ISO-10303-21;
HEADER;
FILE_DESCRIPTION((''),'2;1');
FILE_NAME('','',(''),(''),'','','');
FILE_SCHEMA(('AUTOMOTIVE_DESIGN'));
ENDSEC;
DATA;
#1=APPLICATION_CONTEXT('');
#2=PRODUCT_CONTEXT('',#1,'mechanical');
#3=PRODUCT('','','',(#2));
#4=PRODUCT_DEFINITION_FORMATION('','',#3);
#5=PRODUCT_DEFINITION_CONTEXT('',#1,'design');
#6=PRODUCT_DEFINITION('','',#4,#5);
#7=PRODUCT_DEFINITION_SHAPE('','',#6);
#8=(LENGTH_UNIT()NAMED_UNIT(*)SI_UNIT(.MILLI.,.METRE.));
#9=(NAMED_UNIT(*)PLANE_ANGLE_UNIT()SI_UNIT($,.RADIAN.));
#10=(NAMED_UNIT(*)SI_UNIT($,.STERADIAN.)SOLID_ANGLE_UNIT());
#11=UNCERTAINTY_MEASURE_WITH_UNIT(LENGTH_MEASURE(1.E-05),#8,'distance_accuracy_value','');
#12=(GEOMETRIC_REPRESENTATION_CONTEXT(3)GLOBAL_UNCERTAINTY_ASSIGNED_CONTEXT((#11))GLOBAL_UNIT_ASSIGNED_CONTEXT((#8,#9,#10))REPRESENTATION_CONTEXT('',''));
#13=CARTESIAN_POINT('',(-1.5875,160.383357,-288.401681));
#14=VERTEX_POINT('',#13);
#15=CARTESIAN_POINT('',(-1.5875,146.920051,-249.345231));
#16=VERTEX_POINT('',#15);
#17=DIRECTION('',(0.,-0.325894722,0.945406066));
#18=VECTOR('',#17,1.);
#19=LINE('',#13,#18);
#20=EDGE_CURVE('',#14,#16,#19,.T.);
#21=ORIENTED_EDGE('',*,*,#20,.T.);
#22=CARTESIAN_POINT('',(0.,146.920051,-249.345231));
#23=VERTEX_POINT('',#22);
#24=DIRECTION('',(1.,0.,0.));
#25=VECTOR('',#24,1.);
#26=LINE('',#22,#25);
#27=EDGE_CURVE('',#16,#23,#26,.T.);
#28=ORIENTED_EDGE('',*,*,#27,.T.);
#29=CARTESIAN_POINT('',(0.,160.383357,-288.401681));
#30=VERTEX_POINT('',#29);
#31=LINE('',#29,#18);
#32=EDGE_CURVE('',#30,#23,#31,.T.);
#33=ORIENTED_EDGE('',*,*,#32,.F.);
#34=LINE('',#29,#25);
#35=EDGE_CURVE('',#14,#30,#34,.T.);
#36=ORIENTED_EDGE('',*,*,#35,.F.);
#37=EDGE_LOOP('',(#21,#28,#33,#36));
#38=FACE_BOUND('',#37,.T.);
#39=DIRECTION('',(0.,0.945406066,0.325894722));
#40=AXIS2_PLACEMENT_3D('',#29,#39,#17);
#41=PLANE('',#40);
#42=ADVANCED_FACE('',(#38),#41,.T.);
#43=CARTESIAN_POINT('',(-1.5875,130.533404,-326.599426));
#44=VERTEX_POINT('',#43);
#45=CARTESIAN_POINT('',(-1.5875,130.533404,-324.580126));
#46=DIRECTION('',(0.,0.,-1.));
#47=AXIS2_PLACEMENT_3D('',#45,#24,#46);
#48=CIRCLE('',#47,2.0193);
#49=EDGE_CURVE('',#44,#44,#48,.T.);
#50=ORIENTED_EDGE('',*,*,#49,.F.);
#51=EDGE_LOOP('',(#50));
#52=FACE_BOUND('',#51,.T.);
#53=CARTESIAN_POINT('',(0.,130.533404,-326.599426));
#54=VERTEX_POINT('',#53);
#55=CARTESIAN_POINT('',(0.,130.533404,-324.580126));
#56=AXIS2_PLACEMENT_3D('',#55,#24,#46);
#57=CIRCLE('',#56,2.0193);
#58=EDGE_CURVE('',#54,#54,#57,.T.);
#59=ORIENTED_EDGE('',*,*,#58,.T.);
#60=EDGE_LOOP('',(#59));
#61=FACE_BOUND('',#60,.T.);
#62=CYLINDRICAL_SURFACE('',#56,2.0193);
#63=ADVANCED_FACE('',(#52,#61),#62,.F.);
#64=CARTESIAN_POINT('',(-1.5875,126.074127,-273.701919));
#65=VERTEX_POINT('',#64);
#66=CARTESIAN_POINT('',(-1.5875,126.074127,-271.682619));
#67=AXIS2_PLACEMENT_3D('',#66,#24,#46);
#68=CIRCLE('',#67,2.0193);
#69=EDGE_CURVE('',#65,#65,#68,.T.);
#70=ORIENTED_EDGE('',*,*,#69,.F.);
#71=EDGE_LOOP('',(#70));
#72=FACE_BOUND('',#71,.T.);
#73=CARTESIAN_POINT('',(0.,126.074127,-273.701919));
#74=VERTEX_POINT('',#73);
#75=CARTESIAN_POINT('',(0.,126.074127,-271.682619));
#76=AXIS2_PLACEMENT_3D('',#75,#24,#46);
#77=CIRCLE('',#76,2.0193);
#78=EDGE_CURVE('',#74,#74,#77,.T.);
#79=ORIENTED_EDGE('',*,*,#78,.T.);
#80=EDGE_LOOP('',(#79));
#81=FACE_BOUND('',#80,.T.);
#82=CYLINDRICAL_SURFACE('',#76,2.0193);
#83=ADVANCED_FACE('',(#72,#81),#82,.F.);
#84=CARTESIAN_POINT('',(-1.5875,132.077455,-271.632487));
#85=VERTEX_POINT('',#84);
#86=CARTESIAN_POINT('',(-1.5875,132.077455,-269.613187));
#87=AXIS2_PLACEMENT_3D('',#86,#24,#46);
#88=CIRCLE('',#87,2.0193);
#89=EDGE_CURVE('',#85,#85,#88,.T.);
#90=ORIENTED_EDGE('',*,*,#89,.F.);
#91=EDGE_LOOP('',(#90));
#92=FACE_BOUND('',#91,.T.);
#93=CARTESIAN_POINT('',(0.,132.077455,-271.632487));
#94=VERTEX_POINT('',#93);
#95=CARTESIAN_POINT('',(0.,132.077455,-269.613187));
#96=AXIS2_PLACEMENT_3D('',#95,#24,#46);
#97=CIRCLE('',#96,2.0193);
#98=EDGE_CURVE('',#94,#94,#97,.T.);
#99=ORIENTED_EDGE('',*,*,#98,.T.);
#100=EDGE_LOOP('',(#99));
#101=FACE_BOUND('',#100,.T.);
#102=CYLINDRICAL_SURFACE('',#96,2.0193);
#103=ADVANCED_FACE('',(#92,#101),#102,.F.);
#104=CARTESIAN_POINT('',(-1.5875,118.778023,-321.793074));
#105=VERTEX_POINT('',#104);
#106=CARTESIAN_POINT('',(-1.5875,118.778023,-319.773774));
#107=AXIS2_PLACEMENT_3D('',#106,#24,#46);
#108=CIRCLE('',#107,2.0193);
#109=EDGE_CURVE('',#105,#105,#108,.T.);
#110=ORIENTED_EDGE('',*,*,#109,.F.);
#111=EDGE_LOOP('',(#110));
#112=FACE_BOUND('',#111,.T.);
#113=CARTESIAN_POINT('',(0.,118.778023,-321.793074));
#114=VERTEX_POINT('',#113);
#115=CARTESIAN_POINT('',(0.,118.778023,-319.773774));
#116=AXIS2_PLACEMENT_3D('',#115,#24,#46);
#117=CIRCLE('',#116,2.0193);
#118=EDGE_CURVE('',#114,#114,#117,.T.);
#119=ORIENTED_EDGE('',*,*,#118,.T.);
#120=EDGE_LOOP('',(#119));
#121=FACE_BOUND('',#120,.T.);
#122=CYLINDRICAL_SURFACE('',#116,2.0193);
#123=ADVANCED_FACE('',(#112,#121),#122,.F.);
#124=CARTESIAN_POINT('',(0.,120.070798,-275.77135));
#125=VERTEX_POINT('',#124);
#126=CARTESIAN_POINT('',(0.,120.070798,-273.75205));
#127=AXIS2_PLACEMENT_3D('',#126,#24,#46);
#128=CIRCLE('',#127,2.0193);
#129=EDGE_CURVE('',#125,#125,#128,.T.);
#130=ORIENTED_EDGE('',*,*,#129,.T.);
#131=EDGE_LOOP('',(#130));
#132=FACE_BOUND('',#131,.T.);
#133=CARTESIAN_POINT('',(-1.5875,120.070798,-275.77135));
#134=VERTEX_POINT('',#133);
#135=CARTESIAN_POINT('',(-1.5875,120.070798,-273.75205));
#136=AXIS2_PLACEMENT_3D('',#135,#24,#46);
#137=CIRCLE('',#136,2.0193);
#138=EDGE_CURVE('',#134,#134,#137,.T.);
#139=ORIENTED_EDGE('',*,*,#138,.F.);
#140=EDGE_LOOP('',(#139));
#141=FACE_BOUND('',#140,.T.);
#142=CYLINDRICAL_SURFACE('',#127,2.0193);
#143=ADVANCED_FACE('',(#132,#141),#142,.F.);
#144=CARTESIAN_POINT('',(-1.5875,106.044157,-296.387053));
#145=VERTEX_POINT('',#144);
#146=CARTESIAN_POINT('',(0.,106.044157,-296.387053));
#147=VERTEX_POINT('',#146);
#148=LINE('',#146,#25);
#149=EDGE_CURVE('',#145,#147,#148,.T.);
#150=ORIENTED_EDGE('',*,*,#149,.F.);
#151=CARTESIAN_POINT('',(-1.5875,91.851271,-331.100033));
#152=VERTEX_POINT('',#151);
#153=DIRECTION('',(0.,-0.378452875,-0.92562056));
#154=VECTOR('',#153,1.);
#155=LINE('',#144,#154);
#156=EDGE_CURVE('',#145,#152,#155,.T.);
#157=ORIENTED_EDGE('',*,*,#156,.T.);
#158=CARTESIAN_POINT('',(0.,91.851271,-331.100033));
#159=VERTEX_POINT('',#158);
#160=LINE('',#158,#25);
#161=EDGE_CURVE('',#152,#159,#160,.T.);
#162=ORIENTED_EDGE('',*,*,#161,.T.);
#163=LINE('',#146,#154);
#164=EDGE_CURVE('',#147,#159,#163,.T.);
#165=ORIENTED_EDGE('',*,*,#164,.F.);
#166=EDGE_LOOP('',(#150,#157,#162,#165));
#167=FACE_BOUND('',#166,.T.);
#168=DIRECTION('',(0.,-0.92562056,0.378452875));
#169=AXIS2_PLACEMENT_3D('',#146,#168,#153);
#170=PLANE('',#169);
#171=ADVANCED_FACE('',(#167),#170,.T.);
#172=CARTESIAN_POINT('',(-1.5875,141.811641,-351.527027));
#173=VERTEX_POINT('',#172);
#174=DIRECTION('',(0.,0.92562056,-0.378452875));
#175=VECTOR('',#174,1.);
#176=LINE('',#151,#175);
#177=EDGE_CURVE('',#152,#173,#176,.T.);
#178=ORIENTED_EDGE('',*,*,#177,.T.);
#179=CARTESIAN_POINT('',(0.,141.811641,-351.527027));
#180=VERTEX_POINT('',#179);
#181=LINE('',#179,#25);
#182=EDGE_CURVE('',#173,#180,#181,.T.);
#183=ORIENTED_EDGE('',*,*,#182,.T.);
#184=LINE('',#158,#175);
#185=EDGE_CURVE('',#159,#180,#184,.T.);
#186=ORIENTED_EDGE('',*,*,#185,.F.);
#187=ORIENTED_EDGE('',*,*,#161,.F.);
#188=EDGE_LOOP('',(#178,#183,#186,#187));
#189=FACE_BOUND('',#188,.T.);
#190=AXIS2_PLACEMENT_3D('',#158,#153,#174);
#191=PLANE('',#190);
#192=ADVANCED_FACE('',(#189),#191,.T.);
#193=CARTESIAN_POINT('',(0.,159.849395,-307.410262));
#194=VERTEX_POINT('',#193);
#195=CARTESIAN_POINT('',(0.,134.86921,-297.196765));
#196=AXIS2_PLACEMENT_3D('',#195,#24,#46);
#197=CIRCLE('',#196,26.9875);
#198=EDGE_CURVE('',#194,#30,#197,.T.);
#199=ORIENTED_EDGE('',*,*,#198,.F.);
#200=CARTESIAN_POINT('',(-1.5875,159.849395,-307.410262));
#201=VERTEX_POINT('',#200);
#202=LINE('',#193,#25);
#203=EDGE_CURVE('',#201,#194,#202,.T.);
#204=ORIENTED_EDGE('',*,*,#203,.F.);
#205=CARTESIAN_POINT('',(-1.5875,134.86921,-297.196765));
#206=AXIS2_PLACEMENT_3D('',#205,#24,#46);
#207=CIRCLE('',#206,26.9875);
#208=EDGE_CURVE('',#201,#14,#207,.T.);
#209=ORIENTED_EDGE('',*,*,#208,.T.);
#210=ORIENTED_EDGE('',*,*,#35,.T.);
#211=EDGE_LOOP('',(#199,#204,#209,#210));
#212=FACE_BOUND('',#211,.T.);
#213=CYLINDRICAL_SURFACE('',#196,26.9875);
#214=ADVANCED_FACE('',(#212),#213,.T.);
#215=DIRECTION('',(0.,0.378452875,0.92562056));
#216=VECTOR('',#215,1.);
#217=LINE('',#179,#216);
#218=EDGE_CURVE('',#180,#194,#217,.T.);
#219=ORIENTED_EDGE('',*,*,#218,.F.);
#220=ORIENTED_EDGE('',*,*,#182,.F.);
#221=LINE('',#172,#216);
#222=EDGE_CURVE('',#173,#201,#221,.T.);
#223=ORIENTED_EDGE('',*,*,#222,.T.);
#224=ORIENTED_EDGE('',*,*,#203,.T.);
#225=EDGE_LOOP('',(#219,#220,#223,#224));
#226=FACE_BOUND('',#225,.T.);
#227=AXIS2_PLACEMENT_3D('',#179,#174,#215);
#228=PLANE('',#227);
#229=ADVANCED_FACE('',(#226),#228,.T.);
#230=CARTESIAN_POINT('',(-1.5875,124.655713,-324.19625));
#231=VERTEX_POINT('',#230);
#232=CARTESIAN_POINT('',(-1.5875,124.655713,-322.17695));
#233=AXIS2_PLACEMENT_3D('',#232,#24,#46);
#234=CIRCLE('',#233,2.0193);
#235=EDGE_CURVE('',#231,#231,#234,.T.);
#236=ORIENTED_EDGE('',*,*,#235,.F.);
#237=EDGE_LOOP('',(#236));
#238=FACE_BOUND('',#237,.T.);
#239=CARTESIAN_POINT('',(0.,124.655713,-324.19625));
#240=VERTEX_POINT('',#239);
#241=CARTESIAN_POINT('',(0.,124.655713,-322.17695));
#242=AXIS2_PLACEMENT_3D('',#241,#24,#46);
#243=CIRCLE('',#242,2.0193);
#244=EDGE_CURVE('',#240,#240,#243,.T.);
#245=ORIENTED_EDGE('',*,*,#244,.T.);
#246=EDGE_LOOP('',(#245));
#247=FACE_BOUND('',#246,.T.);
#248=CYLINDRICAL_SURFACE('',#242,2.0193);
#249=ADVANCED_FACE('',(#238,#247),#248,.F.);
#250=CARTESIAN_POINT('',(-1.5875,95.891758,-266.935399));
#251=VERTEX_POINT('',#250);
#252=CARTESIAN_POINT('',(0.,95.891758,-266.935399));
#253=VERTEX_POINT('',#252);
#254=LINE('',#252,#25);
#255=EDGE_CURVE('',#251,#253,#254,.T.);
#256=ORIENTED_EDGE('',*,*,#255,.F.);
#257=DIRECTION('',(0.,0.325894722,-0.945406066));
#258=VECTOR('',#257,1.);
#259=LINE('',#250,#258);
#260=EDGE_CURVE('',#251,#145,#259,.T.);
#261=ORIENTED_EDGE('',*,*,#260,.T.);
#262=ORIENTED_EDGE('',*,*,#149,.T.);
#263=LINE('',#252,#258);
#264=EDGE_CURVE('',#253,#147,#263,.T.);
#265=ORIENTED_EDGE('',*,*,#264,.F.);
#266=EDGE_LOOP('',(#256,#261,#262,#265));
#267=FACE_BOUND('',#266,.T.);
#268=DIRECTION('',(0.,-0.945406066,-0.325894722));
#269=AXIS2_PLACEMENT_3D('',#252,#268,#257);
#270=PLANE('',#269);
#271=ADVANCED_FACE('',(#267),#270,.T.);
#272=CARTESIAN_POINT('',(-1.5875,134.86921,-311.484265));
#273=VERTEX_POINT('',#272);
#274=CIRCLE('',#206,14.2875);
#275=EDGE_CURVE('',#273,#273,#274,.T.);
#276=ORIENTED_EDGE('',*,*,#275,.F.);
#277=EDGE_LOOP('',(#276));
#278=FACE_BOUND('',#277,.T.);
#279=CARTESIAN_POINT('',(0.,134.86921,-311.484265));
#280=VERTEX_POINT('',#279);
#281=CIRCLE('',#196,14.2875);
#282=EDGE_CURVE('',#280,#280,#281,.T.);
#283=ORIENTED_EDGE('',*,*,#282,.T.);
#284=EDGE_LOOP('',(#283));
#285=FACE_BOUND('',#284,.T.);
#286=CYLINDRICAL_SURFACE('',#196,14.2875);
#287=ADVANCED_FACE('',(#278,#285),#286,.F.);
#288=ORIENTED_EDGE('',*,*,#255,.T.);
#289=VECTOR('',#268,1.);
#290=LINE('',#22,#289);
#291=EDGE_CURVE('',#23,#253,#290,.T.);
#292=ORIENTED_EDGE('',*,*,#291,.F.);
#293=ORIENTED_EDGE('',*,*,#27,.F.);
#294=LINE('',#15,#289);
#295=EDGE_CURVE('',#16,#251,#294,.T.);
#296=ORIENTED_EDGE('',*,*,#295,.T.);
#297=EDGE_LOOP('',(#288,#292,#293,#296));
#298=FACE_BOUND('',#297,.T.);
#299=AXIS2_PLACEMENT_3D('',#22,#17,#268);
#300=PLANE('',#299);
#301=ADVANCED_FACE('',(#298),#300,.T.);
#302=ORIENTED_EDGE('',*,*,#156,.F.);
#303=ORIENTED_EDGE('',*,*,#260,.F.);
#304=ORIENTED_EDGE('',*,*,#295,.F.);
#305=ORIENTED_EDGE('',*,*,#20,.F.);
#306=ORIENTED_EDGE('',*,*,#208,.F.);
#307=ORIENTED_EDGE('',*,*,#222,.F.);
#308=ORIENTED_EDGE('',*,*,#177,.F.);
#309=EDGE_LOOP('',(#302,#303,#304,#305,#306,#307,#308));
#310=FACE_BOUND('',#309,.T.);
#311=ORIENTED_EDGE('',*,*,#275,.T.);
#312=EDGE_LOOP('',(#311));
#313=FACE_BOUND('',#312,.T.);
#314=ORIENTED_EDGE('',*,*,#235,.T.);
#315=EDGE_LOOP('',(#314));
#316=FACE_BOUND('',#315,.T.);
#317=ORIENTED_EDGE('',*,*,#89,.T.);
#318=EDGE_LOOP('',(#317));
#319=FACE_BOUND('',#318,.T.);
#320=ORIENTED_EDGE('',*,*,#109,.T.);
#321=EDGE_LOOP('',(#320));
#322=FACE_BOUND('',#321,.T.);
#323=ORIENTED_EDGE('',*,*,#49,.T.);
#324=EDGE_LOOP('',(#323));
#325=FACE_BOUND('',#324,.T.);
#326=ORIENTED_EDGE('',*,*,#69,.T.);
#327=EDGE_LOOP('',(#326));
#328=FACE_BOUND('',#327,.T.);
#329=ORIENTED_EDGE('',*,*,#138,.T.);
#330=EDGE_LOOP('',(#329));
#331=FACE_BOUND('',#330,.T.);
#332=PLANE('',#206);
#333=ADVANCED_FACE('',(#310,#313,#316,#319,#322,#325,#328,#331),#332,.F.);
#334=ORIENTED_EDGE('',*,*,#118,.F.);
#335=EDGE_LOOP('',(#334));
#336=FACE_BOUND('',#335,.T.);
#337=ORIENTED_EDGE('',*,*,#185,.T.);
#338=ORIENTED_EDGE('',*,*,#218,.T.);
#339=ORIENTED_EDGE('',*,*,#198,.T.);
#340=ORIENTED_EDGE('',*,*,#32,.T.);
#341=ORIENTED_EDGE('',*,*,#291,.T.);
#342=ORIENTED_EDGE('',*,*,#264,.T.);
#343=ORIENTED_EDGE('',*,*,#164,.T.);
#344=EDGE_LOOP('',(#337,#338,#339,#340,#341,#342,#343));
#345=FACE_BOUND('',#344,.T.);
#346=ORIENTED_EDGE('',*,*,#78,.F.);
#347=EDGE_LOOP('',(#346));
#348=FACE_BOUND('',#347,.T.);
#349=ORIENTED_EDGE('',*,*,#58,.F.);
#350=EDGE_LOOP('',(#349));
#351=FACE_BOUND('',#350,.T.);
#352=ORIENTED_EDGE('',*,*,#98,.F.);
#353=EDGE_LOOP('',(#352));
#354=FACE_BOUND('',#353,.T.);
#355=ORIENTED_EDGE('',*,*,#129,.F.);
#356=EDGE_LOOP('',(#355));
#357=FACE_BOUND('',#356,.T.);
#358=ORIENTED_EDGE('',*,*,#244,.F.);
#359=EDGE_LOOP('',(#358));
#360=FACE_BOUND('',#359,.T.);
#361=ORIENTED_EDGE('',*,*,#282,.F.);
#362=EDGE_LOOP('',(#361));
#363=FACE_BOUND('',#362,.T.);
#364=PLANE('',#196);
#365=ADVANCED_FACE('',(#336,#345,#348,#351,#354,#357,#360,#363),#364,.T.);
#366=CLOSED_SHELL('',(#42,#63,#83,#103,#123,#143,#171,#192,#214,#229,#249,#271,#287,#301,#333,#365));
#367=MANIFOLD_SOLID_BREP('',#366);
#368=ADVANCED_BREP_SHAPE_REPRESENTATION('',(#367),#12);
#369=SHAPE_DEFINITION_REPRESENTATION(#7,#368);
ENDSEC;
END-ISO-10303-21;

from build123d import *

# Parameters (mm, degrees)
SKETCH1_R           = 2.0193
SKETCH1_R_2         = 14.2875
BOSS_EXTRUDE1_DEPTH = 1.5875


with BuildPart() as part:
    # Sketch1 → Boss-Extrude1 (new body)
    with BuildSketch(Plane(origin=(0, 0, 0), x_dir=(0, 0, -1), z_dir=(1, 0, 0))):
        with BuildLine():
            Line((288.401681083, 160.383356591), (249.345231223, 146.9200509))
            Line((249.345231223, 146.9200509), (266.935398847, 95.891758474))
            Line((266.935398847, 95.891758474), (296.387053498, 106.044156633))
            Line((296.387053498, 106.044156633), (331.100032982, 91.851270852))
            Line((331.100032982, 91.851270852), (351.527026912, 141.811640586))
            Line((351.527026912, 141.811640586), (307.41026186, 159.849395245))
            ThreePointArc((307.41026186, 159.849395245), (297.954559489, 161.846069046), (288.401681083, 160.383356591))
        make_face()
        with Locations((269.613187196, 132.077455087)):
            Circle(SKETCH1_R, mode=Mode.SUBTRACT)
        with Locations((271.682618681, 126.074126566)):
            Circle(SKETCH1_R, mode=Mode.SUBTRACT)
        with Locations((273.752050167, 120.070798045)):
            Circle(SKETCH1_R, mode=Mode.SUBTRACT)
        with Locations((297.196764895, 134.869210378)):
            Circle(SKETCH1_R_2, mode=Mode.SUBTRACT)
        with Locations((324.580125518, 130.53340397)):
            Circle(SKETCH1_R, mode=Mode.SUBTRACT)
        with Locations((322.176949762, 124.655713413)):
            Circle(SKETCH1_R, mode=Mode.SUBTRACT)
        with Locations((319.773774005, 118.778022856)):
            Circle(SKETCH1_R, mode=Mode.SUBTRACT)
    extrude(amount=-BOSS_EXTRUDE1_DEPTH)


solid = part.part
